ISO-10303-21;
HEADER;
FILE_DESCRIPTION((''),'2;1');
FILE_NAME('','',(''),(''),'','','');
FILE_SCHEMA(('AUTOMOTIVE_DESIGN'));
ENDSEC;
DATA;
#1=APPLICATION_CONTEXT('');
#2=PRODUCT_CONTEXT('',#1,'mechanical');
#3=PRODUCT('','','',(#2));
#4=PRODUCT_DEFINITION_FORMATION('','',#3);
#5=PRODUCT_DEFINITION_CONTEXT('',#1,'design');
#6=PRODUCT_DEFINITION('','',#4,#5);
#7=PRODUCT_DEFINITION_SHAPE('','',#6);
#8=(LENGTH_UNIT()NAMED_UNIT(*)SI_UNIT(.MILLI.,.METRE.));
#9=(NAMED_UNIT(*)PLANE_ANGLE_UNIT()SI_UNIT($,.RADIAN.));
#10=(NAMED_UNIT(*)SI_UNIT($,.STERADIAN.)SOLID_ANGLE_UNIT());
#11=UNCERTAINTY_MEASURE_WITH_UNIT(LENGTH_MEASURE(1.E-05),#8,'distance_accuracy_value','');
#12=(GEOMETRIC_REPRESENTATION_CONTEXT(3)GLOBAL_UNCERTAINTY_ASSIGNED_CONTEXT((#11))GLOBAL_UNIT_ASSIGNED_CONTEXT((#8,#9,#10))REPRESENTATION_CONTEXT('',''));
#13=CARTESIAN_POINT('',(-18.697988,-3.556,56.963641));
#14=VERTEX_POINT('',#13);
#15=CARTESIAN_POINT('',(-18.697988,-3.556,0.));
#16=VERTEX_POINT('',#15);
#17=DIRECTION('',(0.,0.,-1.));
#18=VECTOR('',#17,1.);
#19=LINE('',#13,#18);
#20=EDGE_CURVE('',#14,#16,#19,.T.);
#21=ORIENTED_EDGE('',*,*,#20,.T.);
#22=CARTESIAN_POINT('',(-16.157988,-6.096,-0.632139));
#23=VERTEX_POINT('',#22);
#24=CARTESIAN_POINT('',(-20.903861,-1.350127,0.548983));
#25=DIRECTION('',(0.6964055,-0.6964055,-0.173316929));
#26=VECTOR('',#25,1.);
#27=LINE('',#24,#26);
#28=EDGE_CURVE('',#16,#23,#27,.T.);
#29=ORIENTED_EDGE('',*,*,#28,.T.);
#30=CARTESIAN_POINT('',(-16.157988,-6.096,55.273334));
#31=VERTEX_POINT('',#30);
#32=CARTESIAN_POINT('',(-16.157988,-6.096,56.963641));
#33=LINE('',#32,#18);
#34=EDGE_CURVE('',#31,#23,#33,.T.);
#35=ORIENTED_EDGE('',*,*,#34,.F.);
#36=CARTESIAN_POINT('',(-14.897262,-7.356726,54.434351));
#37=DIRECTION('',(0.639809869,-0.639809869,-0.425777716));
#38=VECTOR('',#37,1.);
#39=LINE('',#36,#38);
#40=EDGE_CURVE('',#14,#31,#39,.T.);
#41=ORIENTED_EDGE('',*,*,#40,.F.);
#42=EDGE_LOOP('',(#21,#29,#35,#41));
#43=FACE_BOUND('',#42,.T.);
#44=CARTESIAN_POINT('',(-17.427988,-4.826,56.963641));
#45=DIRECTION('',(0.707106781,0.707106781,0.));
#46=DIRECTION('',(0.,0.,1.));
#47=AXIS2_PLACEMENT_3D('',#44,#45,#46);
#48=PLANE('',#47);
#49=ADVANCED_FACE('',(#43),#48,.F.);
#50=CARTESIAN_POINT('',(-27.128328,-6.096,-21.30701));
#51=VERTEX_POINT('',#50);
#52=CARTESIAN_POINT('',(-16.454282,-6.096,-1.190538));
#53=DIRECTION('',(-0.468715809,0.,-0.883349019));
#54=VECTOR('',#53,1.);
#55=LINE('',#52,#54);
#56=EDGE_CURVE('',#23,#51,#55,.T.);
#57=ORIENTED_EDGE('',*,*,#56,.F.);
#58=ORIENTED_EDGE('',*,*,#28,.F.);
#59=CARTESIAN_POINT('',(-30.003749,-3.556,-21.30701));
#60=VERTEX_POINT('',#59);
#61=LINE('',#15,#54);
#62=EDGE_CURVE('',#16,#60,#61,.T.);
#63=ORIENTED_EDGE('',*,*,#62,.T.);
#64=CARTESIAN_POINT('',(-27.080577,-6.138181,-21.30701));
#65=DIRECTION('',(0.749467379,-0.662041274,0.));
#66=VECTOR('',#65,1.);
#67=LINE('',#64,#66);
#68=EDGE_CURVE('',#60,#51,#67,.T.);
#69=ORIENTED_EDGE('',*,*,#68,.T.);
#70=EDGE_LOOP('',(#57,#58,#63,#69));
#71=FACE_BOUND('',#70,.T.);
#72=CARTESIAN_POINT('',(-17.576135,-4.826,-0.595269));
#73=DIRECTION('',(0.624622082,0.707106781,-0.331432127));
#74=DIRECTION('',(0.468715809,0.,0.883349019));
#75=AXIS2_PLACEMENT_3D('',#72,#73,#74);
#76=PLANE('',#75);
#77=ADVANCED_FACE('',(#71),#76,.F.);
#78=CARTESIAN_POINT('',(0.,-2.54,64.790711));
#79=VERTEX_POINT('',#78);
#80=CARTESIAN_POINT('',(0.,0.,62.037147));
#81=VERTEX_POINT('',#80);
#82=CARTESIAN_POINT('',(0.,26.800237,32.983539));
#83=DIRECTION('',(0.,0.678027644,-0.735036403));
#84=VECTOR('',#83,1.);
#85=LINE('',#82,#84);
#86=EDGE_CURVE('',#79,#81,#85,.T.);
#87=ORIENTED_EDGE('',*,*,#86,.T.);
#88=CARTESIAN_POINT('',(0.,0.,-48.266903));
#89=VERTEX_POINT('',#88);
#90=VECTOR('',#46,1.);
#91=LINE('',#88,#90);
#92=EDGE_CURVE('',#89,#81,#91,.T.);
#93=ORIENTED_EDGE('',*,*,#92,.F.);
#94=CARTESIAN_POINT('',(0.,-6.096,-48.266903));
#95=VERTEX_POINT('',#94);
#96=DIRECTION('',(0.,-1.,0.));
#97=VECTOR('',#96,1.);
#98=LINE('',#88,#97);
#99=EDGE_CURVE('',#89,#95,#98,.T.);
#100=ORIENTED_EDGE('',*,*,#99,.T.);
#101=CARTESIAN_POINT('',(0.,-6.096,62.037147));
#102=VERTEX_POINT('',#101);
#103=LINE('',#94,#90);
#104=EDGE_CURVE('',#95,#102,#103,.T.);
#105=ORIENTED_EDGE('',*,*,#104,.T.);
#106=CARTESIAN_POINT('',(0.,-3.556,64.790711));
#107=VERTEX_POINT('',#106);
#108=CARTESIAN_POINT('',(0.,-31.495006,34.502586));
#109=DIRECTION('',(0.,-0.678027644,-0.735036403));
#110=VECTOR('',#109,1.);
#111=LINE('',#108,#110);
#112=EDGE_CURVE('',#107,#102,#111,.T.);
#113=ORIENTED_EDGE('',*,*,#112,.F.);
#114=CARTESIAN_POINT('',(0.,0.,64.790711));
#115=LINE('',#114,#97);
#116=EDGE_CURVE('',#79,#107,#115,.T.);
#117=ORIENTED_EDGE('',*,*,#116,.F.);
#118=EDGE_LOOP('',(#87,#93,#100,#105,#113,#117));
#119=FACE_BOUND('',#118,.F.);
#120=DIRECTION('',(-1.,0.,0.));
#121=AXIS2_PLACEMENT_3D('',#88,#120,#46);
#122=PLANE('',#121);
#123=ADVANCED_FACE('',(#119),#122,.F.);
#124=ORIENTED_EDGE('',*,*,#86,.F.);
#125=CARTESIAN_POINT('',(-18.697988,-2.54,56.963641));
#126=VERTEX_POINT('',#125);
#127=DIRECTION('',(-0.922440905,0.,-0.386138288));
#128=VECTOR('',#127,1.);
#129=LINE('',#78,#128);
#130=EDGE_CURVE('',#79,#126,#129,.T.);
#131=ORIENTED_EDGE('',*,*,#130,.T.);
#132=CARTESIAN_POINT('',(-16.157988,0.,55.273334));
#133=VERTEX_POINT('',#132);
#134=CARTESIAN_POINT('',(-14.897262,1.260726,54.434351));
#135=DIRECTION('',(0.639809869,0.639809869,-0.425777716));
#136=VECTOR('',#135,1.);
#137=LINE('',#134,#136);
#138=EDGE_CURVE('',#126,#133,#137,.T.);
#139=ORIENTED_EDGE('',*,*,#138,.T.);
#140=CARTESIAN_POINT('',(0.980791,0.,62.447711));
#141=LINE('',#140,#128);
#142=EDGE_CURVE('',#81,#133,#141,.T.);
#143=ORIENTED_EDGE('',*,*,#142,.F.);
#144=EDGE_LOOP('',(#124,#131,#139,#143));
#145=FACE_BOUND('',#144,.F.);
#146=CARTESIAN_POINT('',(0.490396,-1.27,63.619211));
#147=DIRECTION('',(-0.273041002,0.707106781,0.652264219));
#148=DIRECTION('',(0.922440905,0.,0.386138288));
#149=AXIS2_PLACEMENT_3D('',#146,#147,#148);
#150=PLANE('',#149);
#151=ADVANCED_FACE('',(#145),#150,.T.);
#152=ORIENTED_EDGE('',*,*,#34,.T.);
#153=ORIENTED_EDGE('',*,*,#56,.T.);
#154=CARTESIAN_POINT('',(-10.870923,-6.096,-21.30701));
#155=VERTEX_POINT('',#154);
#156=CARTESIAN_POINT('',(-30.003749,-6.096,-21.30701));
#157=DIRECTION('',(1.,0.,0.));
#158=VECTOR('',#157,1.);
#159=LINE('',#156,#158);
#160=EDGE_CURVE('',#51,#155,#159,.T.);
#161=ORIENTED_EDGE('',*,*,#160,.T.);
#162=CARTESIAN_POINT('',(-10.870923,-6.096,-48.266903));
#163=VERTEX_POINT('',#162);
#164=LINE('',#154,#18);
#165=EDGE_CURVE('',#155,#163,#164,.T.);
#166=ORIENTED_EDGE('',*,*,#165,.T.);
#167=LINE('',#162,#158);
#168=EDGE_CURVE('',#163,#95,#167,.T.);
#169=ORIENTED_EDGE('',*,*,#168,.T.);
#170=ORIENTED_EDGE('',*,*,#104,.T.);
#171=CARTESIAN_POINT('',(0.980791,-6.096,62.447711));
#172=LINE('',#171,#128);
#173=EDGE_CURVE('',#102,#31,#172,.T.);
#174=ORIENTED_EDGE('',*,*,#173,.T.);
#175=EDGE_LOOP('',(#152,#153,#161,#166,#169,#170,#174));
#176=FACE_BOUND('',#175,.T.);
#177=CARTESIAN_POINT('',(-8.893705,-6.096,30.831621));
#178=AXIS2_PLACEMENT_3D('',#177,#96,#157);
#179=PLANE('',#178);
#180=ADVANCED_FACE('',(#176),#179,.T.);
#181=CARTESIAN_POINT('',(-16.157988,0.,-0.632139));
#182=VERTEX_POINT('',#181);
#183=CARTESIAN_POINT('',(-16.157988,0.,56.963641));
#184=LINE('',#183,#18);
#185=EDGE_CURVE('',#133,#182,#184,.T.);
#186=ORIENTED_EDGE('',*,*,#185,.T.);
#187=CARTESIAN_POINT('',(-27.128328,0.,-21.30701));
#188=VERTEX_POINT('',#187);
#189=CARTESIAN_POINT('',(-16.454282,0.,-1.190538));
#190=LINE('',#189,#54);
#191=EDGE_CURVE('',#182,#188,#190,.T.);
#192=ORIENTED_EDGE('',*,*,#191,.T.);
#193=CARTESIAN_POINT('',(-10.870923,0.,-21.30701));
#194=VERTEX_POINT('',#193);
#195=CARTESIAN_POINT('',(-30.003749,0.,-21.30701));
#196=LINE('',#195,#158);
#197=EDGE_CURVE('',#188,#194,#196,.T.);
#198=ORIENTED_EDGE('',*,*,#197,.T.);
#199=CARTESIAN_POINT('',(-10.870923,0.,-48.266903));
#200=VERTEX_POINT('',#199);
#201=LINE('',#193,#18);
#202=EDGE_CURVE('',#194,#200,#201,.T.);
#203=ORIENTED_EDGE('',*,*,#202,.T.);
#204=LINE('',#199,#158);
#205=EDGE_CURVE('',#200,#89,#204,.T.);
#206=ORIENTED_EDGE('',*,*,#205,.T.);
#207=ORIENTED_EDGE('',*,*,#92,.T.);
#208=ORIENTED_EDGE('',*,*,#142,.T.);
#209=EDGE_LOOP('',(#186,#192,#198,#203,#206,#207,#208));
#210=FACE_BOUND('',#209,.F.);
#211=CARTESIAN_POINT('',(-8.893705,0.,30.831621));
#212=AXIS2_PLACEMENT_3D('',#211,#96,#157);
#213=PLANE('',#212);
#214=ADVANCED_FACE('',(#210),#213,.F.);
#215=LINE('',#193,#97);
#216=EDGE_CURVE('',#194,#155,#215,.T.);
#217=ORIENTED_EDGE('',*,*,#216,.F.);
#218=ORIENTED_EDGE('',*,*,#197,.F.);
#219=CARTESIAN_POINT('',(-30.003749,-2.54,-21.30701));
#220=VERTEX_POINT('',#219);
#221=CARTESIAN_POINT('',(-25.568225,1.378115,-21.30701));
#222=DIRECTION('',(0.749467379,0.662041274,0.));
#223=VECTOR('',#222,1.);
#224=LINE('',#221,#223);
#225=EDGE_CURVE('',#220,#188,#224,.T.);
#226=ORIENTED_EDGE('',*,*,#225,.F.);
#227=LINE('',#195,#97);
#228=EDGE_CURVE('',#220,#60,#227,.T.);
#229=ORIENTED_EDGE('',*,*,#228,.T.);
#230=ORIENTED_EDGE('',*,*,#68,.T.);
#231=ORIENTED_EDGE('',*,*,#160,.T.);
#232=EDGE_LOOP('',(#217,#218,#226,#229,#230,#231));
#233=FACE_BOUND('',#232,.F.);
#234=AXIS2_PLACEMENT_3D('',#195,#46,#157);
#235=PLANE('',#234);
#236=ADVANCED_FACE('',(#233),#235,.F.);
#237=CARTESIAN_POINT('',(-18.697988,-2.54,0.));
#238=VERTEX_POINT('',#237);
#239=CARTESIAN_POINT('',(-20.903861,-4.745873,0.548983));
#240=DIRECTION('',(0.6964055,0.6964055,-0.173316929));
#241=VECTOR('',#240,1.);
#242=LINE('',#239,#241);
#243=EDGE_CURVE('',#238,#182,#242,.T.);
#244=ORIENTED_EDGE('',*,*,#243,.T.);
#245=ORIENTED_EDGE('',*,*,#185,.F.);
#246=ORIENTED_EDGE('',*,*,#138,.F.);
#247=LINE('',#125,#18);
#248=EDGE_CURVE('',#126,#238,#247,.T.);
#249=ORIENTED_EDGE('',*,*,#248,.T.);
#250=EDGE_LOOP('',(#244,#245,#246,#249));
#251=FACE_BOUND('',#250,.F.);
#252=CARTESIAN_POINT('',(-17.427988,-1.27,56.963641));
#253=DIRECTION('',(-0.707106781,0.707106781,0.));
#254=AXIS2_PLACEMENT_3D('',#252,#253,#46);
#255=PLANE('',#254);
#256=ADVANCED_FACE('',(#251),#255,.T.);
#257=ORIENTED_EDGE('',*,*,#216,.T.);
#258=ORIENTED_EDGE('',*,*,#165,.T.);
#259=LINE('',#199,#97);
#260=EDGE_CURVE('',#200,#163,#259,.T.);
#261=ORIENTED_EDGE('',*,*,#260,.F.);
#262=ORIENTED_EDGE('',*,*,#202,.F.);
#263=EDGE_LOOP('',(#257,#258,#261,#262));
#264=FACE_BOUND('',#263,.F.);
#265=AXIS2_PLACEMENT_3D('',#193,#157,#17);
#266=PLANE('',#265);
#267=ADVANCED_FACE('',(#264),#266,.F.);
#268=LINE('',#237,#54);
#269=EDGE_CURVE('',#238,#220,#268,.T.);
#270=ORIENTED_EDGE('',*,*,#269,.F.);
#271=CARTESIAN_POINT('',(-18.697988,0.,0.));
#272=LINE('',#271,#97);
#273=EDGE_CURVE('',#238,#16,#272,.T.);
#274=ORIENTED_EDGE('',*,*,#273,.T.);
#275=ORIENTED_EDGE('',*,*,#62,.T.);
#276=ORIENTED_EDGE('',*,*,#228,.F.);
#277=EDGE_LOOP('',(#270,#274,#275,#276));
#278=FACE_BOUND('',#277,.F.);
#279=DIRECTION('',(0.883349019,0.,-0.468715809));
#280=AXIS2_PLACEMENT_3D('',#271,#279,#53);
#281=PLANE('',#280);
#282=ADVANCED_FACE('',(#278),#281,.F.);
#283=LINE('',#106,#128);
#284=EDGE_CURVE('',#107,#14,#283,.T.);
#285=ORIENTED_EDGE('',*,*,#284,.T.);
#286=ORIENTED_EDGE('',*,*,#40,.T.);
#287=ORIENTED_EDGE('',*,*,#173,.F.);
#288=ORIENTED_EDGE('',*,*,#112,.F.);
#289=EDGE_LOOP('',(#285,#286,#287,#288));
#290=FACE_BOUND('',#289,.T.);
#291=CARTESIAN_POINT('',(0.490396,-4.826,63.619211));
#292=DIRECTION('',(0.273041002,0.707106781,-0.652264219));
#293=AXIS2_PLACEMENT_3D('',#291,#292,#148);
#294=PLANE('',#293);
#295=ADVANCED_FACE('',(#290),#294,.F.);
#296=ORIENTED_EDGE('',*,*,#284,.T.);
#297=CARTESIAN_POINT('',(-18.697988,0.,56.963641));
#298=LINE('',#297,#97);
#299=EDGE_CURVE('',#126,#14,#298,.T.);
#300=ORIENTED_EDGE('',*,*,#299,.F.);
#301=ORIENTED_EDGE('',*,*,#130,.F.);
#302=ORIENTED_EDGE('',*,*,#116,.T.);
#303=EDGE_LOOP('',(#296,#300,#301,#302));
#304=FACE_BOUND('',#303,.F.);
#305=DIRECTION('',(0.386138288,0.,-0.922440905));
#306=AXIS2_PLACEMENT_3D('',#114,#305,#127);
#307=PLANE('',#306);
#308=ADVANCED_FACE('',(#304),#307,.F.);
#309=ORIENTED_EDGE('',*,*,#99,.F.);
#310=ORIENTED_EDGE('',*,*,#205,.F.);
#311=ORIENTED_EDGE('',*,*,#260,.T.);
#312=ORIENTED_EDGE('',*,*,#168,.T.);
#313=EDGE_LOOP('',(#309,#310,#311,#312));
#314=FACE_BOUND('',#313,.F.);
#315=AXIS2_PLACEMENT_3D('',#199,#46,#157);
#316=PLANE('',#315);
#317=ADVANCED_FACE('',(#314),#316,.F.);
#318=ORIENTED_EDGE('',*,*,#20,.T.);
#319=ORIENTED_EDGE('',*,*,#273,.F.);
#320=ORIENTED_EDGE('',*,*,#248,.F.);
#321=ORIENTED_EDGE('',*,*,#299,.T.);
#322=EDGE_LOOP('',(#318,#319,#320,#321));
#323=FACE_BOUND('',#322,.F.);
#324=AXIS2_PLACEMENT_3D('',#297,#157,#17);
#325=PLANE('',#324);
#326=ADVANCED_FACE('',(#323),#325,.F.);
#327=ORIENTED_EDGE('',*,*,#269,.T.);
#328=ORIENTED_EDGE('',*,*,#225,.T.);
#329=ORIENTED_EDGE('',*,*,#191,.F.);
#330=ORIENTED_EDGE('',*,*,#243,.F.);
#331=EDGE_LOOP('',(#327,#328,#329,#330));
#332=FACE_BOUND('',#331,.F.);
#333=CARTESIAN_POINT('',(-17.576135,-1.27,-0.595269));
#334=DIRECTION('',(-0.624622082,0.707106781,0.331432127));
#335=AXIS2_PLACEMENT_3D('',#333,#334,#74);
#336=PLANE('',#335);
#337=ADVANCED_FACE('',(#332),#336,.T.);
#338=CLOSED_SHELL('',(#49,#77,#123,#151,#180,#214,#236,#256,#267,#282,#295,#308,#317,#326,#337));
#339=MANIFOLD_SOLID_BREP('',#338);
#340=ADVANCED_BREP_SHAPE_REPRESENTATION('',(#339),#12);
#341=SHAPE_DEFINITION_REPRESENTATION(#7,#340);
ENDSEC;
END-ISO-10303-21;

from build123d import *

# Parameters (mm, degrees)
F1_DEPTH = 6.096
F3_SIZE  = 2.54


# Not quite as in the source:
# - a feature of the source that left no trace in its solid (it failed there, or was rolled back) is left out


with BuildPart() as f1:
    # F0 (on Front) → F1 (new body)
    with BuildSketch(Plane.XZ):
        Polygon((0, 0), (0, 64.7907108068), (-18.6979882419, 56.9636411965), (-18.6979882419, 0), align=None)
        Polygon((0, -48.266902566), (0, 0), (-18.6979882419, 0), (-30.0037488341, -21.3070102036), (-10.8709232882, -21.3070102036), (-10.8709232882, -48.266902566), align=None)
    extrude(amount=F1_DEPTH)

    # F3
    f3_edges = [f1.edges().sort_by_distance(p)[0] for p in [
        (-18.697988, -6.096, 28.481821),
        (-24.350869, -6.096, -10.653505),
        (-9.348994, -6.096, 60.877176),
        (-9.348994, 0, 60.877176),
        (-18.697988, 0, 28.481821),
        (-24.350869, 0, -10.653505),
    ]]
    chamfer(f3_edges, length=F3_SIZE)


solid = f1.part
